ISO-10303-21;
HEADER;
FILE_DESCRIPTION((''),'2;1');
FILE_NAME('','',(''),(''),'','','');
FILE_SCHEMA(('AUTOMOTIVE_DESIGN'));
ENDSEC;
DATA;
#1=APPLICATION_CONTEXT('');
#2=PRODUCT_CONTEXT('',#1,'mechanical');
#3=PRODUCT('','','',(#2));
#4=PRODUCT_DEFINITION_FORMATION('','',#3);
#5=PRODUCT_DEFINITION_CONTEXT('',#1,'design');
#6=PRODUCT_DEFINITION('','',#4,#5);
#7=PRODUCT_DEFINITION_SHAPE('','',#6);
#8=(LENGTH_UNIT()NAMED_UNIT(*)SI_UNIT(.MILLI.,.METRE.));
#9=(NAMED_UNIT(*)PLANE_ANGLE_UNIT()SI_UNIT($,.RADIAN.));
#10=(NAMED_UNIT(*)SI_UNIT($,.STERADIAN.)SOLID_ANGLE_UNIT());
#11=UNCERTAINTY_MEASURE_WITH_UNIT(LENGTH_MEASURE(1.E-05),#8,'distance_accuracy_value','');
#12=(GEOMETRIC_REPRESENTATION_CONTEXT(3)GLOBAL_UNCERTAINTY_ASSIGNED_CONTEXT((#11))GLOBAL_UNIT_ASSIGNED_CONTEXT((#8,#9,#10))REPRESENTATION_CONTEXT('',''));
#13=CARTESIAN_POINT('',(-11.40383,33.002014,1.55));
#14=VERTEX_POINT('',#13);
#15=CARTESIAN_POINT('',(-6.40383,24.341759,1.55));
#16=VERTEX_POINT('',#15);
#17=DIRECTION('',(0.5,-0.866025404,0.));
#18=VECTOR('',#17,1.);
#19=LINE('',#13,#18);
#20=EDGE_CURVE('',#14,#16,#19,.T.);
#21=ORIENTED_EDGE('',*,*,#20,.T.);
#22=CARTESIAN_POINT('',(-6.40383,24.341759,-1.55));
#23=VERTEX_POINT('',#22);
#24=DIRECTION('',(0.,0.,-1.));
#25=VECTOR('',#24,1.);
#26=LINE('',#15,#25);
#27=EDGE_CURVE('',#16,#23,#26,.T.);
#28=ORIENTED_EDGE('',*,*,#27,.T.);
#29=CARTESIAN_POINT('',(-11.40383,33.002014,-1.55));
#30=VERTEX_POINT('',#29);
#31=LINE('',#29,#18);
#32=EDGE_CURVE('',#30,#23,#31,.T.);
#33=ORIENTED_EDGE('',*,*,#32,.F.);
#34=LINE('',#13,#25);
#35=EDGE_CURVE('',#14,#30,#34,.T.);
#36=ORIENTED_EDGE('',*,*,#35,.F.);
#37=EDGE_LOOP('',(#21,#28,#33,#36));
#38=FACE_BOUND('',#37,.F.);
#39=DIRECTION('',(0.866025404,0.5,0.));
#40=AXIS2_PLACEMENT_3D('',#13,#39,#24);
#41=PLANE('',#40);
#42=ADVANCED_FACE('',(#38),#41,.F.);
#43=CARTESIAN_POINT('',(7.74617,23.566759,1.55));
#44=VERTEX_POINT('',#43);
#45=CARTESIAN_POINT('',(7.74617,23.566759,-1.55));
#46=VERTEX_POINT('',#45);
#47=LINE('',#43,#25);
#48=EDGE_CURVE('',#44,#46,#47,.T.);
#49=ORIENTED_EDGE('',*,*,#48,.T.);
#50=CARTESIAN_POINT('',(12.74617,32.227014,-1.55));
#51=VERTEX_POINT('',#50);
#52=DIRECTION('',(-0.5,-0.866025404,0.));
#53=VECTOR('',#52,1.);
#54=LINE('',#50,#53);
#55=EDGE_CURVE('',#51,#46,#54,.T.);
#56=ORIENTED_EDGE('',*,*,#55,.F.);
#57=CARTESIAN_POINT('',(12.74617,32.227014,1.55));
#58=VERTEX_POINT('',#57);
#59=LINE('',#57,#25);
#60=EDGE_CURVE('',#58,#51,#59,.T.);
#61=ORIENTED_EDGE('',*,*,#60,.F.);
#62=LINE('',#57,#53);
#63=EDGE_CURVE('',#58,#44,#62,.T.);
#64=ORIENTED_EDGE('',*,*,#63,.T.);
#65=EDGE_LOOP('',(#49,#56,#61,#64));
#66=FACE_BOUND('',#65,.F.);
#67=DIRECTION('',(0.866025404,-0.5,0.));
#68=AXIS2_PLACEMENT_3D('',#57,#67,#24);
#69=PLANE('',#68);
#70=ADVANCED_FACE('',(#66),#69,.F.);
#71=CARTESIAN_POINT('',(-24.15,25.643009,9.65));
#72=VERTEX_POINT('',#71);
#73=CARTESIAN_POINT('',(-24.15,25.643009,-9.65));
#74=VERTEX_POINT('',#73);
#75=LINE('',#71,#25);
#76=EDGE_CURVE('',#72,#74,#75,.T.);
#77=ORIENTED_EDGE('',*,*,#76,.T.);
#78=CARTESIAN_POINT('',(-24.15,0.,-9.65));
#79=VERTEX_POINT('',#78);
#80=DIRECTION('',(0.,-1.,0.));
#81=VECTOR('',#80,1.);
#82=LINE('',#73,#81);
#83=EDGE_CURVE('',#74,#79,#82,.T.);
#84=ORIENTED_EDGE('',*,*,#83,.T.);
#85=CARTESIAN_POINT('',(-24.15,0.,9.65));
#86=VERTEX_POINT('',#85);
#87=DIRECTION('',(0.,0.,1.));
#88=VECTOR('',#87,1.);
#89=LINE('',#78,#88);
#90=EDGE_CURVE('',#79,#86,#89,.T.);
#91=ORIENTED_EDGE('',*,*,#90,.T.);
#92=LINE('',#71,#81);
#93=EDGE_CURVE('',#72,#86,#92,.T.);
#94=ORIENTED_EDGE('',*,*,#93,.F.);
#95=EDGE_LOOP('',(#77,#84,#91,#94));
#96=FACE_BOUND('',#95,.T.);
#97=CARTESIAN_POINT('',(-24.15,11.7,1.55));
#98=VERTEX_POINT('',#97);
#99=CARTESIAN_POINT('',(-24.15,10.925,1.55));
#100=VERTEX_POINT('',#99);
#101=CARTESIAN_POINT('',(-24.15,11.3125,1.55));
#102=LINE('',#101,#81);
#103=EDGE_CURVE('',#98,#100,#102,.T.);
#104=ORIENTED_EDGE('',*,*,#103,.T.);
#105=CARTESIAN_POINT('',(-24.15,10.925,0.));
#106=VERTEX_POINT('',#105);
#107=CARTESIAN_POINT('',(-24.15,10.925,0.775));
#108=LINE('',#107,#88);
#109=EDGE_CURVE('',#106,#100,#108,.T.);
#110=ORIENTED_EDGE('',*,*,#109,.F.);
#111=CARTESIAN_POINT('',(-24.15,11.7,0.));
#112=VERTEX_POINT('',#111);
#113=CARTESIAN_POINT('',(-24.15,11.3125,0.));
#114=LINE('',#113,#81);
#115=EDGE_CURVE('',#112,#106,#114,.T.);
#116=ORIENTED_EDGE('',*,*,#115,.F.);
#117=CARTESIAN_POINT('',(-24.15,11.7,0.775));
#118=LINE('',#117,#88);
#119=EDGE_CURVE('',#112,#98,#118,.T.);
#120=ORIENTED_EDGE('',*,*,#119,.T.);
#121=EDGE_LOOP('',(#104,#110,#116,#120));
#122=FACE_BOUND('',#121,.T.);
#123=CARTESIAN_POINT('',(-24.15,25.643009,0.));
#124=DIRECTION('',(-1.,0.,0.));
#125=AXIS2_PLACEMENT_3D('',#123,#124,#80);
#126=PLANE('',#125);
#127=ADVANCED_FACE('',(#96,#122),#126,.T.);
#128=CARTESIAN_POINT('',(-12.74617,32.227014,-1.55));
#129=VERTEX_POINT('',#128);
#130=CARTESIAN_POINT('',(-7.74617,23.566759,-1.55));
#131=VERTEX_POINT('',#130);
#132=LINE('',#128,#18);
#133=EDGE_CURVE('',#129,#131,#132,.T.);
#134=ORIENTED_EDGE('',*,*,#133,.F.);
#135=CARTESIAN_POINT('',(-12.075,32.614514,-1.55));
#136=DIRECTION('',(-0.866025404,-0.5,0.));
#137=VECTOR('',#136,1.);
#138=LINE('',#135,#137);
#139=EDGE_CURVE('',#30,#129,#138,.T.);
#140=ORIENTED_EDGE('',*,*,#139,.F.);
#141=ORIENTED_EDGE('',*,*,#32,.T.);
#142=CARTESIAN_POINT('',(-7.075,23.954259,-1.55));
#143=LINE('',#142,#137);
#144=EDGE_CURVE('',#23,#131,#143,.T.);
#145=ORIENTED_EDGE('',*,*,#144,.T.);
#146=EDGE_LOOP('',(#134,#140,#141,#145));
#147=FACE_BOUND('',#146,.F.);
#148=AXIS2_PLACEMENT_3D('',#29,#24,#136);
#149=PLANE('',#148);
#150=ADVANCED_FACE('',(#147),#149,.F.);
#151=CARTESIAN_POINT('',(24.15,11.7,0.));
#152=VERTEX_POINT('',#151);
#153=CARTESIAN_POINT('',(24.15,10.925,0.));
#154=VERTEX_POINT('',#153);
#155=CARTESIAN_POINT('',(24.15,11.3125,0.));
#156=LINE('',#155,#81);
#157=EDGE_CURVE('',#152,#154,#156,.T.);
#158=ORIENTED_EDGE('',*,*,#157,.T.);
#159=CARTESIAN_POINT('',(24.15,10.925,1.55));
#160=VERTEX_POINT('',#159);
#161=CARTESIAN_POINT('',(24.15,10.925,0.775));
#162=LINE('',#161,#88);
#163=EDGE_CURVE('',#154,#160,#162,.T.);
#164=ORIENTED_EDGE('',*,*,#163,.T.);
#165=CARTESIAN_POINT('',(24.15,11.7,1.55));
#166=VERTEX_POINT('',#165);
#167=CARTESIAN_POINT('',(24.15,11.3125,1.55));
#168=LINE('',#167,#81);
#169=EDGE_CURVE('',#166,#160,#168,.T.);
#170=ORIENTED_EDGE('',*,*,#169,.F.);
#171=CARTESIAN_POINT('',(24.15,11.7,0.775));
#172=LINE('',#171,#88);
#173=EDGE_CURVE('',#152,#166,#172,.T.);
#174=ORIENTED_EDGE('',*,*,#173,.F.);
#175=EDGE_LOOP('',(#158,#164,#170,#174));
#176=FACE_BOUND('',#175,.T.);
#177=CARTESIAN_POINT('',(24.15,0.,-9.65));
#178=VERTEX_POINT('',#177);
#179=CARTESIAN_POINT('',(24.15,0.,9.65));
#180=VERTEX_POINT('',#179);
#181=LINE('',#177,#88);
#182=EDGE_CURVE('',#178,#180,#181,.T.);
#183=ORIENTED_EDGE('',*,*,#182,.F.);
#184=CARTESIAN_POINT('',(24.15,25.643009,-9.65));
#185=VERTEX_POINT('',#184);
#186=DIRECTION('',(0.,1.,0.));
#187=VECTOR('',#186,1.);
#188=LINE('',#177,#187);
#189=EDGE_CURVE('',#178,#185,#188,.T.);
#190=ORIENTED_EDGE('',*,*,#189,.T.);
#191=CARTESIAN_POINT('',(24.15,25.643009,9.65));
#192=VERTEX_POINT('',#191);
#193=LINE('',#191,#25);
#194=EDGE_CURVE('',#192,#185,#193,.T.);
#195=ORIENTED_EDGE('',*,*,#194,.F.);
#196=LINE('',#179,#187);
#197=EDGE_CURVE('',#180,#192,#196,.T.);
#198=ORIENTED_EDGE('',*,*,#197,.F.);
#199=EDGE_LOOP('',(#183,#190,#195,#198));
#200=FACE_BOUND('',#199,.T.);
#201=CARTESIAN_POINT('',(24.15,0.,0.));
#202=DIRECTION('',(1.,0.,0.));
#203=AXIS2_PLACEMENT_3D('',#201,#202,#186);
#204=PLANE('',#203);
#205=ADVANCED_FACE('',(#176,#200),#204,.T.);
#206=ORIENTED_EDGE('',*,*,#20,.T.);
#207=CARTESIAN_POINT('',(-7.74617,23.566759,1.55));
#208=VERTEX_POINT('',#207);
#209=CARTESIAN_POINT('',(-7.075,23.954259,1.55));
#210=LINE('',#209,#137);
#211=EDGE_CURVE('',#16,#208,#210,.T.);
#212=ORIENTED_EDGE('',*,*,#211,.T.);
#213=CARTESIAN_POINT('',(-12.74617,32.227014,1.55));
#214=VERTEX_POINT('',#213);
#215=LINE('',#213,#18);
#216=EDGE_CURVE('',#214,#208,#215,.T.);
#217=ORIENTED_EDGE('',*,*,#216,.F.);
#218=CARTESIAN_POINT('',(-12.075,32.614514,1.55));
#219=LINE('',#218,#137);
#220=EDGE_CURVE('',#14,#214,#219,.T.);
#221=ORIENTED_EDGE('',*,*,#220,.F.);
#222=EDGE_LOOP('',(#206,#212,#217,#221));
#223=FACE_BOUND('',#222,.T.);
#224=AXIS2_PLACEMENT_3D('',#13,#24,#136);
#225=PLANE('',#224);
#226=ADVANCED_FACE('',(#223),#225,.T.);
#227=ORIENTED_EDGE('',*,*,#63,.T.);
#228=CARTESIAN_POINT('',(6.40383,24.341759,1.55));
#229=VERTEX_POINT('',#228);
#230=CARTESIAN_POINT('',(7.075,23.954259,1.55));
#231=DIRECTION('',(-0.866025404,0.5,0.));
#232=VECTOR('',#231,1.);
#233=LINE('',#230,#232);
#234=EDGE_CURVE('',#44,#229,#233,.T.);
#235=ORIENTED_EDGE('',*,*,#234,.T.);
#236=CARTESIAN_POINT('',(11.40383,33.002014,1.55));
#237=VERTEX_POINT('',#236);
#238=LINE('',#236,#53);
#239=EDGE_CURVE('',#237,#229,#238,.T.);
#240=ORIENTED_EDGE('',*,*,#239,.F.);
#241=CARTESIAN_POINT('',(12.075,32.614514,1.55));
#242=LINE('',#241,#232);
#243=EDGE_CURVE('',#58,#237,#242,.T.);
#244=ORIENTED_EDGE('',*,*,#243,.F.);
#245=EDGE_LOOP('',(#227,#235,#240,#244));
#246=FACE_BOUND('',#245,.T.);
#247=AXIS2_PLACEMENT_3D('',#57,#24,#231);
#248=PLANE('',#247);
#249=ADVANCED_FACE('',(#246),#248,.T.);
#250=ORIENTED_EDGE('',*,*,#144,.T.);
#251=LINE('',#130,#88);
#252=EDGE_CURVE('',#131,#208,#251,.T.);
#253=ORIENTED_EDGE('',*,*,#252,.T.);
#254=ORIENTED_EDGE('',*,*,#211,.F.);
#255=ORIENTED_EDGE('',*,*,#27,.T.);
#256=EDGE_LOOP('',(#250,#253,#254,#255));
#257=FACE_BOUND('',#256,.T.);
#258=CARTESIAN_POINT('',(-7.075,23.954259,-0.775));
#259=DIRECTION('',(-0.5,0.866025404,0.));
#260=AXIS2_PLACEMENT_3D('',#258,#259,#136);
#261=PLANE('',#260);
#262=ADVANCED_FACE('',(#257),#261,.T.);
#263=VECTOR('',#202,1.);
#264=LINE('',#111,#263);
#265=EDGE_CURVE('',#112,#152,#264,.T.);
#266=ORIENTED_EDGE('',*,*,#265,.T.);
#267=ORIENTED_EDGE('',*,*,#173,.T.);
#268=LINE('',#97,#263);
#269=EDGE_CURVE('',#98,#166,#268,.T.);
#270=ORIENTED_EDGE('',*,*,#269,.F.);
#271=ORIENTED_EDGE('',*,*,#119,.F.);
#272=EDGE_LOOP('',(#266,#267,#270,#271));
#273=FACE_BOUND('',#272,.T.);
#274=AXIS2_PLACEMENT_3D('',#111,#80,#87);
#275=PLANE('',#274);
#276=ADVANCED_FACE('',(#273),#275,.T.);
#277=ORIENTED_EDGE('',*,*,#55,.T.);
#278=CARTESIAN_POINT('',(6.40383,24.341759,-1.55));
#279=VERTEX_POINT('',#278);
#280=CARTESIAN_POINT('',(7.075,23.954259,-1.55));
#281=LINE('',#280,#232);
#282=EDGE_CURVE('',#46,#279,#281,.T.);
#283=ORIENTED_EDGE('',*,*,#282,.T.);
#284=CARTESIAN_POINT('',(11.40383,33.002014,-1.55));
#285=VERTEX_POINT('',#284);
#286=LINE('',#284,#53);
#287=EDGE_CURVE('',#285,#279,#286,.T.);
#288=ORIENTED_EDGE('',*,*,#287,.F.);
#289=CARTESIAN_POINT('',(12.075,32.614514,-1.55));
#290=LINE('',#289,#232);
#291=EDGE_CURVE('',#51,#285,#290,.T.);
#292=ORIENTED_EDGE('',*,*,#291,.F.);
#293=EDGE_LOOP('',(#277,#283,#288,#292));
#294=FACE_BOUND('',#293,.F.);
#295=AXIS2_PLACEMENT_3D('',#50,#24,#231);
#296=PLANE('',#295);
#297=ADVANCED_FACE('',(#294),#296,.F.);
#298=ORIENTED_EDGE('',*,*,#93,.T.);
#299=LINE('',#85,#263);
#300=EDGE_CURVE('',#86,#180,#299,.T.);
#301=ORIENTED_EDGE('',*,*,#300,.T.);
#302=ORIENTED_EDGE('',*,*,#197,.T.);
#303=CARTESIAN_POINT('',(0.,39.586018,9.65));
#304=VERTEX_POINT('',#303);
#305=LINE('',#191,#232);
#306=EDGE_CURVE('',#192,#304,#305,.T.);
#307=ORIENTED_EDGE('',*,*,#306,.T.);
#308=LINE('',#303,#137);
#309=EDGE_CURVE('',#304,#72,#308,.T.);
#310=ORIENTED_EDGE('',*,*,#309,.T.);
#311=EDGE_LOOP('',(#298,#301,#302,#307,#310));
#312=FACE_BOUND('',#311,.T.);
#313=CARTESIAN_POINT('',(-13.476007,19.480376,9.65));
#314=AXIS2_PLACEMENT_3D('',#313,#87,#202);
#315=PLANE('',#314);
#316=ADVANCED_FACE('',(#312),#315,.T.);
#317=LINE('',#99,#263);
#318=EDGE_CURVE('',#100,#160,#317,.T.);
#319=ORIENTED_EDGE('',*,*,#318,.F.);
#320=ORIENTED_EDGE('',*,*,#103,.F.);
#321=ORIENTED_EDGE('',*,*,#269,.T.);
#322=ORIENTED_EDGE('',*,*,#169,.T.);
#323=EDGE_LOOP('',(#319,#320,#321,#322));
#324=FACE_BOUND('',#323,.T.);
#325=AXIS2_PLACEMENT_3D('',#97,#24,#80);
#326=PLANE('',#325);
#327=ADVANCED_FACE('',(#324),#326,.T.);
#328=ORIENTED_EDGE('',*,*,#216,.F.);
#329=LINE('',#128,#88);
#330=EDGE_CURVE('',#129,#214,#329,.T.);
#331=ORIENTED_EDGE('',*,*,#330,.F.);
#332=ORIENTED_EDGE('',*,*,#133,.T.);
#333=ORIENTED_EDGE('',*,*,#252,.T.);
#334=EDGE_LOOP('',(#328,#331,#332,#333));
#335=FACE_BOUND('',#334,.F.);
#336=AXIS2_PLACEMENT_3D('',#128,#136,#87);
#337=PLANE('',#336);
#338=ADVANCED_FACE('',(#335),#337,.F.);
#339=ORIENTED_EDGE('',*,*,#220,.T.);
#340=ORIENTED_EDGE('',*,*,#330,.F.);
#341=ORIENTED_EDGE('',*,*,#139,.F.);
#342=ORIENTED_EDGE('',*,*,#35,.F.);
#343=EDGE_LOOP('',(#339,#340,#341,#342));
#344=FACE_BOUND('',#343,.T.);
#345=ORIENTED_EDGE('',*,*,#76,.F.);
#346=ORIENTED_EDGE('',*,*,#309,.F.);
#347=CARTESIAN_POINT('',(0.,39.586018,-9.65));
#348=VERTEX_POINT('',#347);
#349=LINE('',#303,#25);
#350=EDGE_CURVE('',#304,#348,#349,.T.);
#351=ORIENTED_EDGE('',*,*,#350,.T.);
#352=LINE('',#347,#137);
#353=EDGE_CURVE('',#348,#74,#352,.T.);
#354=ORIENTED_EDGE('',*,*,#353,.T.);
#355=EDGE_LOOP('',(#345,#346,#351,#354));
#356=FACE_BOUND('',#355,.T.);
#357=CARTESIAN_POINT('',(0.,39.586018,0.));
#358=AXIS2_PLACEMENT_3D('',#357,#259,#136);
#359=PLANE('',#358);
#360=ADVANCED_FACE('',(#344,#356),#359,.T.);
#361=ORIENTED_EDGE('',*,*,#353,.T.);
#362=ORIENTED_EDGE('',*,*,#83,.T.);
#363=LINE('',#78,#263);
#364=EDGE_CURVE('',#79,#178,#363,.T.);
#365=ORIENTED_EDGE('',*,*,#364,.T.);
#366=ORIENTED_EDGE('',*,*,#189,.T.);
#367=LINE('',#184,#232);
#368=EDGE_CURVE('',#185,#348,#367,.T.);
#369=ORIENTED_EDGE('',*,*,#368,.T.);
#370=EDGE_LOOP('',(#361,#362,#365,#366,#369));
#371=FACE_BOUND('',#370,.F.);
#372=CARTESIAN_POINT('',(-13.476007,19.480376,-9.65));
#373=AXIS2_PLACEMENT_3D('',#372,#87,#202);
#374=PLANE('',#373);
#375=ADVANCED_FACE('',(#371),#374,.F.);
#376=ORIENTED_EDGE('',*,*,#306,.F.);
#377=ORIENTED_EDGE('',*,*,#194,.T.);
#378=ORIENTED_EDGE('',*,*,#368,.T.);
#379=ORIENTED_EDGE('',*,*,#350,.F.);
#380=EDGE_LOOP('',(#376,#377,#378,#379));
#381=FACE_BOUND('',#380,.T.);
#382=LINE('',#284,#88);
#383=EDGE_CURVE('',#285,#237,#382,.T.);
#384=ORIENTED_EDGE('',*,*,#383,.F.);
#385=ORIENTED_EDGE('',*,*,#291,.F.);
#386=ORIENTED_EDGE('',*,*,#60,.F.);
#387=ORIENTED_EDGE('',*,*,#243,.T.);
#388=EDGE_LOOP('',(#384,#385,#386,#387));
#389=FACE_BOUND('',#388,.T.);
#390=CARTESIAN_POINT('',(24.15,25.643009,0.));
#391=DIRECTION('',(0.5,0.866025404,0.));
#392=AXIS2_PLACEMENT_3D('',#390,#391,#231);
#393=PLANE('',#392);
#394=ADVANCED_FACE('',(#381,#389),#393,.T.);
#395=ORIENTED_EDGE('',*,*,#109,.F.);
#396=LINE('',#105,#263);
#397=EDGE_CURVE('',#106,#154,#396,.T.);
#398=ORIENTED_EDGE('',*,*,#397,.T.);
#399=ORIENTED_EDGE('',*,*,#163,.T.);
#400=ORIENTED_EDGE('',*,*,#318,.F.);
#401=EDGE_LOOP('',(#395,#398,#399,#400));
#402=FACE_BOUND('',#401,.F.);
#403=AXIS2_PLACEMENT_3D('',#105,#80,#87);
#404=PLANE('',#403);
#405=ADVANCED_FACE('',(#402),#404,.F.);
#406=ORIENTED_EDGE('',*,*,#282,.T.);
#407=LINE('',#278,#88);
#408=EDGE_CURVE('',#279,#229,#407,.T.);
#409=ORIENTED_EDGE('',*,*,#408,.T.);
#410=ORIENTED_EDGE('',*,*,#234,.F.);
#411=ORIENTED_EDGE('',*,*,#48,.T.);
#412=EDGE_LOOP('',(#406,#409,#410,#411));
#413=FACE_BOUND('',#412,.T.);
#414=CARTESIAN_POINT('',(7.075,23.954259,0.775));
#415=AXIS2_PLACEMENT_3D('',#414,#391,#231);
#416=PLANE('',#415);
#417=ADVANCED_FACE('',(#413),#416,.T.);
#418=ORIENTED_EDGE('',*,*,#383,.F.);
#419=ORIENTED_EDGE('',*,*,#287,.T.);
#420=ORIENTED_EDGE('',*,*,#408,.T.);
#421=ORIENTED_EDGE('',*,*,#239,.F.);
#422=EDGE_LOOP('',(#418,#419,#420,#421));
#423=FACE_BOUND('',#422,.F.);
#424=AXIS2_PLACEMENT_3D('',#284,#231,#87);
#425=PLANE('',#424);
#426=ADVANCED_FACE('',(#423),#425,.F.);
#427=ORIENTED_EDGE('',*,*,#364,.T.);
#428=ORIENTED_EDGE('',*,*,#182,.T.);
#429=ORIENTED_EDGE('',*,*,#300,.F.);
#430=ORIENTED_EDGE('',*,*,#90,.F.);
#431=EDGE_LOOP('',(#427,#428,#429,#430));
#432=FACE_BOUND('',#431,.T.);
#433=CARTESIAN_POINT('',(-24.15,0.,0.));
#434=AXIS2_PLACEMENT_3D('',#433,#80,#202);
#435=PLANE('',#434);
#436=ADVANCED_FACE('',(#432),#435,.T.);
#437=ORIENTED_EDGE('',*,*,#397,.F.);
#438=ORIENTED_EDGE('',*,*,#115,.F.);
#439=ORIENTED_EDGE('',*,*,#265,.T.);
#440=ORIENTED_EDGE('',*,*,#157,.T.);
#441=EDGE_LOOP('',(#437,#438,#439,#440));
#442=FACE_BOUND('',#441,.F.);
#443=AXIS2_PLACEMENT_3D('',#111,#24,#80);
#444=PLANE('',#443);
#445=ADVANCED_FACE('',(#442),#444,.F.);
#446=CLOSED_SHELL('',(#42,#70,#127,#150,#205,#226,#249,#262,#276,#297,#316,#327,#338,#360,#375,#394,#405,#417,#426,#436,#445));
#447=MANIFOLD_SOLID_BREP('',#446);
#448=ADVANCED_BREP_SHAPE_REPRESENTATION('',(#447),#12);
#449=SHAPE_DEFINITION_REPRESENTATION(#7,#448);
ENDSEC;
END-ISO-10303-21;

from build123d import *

# Parameters (mm, degrees)
F0_W     = 24.15
F0_H     = 11.7
F1_DEPTH = 9.65
F2_W     = 0.775
F2_H     = 1.55
F3_DEPTH = 48.3
F4_W     = 1.55
F4_H     = 1.55
F5_DEPTH = 10
F6_W     = 1.55
F6_H     = 1.55
F7_DEPTH = 10


with BuildPart() as f1:
    # F0 (on Top) → F1 (new body, symmetric)
    with BuildSketch(Plane.XY):
        Polygon((-24.15, 11.7), (0, 11.7), (-12.075, 32.6145135014), (-24.15, 25.6430090009), align=None)
        with Locations((-12.075, 5.85)):
            Rectangle(F0_W, F0_H)
        with Locations((12.075, 5.85)):
            Rectangle(F0_W, F0_H)
        Polygon((12.075, 32.6145135014), (0, 11.7), (24.15, 11.7), (24.15, 25.6430090009), align=None)
        Polygon((-12.075, 32.6145135014), (0, 11.7), (12.075, 32.6145135014), (0, 39.5860180019), align=None)
    extrude(amount=F1_DEPTH, both=True)

    # F2 (on face) → F3 (cut)
    with BuildSketch(Plane(origin=(-24.15, 0, 0), x_dir=(0, -1, 0), z_dir=(-1, 0, 0))):
        with Locations((-11.3125, 0.775)):
            Rectangle(F2_W, F2_H)
    extrude(amount=-F3_DEPTH, mode=Mode.SUBTRACT)

    # F4 (on face) → F5 (cut)
    with BuildSketch(Plane(origin=(17.1412486121, 29.6895135014, 0), x_dir=(-0.8660254038, 0.5, 0), z_dir=(0.5, 0.8660254038, 0))):
        with Locations((5.85, 0.775)):
            Rectangle(F4_W, F4_H)
        with Locations((5.85, -0.775)):
            Rectangle(F4_W, F4_H)
    extrude(amount=-F5_DEPTH, mode=Mode.SUBTRACT)

    # F6 (on face) → F7 (cut)
    with BuildSketch(Plane(origin=(-17.1412486121, 29.6895135014, 0), x_dir=(-0.8660254038, -0.5, 0), z_dir=(-0.5, 0.8660254038, 0))):
        with Locations((-5.85, -0.775)):
            Rectangle(F6_W, F6_H)
        with Locations((-5.85, 0.775)):
            Rectangle(F6_W, F6_H)
    extrude(amount=-F7_DEPTH, mode=Mode.SUBTRACT)


solid = f1.part
